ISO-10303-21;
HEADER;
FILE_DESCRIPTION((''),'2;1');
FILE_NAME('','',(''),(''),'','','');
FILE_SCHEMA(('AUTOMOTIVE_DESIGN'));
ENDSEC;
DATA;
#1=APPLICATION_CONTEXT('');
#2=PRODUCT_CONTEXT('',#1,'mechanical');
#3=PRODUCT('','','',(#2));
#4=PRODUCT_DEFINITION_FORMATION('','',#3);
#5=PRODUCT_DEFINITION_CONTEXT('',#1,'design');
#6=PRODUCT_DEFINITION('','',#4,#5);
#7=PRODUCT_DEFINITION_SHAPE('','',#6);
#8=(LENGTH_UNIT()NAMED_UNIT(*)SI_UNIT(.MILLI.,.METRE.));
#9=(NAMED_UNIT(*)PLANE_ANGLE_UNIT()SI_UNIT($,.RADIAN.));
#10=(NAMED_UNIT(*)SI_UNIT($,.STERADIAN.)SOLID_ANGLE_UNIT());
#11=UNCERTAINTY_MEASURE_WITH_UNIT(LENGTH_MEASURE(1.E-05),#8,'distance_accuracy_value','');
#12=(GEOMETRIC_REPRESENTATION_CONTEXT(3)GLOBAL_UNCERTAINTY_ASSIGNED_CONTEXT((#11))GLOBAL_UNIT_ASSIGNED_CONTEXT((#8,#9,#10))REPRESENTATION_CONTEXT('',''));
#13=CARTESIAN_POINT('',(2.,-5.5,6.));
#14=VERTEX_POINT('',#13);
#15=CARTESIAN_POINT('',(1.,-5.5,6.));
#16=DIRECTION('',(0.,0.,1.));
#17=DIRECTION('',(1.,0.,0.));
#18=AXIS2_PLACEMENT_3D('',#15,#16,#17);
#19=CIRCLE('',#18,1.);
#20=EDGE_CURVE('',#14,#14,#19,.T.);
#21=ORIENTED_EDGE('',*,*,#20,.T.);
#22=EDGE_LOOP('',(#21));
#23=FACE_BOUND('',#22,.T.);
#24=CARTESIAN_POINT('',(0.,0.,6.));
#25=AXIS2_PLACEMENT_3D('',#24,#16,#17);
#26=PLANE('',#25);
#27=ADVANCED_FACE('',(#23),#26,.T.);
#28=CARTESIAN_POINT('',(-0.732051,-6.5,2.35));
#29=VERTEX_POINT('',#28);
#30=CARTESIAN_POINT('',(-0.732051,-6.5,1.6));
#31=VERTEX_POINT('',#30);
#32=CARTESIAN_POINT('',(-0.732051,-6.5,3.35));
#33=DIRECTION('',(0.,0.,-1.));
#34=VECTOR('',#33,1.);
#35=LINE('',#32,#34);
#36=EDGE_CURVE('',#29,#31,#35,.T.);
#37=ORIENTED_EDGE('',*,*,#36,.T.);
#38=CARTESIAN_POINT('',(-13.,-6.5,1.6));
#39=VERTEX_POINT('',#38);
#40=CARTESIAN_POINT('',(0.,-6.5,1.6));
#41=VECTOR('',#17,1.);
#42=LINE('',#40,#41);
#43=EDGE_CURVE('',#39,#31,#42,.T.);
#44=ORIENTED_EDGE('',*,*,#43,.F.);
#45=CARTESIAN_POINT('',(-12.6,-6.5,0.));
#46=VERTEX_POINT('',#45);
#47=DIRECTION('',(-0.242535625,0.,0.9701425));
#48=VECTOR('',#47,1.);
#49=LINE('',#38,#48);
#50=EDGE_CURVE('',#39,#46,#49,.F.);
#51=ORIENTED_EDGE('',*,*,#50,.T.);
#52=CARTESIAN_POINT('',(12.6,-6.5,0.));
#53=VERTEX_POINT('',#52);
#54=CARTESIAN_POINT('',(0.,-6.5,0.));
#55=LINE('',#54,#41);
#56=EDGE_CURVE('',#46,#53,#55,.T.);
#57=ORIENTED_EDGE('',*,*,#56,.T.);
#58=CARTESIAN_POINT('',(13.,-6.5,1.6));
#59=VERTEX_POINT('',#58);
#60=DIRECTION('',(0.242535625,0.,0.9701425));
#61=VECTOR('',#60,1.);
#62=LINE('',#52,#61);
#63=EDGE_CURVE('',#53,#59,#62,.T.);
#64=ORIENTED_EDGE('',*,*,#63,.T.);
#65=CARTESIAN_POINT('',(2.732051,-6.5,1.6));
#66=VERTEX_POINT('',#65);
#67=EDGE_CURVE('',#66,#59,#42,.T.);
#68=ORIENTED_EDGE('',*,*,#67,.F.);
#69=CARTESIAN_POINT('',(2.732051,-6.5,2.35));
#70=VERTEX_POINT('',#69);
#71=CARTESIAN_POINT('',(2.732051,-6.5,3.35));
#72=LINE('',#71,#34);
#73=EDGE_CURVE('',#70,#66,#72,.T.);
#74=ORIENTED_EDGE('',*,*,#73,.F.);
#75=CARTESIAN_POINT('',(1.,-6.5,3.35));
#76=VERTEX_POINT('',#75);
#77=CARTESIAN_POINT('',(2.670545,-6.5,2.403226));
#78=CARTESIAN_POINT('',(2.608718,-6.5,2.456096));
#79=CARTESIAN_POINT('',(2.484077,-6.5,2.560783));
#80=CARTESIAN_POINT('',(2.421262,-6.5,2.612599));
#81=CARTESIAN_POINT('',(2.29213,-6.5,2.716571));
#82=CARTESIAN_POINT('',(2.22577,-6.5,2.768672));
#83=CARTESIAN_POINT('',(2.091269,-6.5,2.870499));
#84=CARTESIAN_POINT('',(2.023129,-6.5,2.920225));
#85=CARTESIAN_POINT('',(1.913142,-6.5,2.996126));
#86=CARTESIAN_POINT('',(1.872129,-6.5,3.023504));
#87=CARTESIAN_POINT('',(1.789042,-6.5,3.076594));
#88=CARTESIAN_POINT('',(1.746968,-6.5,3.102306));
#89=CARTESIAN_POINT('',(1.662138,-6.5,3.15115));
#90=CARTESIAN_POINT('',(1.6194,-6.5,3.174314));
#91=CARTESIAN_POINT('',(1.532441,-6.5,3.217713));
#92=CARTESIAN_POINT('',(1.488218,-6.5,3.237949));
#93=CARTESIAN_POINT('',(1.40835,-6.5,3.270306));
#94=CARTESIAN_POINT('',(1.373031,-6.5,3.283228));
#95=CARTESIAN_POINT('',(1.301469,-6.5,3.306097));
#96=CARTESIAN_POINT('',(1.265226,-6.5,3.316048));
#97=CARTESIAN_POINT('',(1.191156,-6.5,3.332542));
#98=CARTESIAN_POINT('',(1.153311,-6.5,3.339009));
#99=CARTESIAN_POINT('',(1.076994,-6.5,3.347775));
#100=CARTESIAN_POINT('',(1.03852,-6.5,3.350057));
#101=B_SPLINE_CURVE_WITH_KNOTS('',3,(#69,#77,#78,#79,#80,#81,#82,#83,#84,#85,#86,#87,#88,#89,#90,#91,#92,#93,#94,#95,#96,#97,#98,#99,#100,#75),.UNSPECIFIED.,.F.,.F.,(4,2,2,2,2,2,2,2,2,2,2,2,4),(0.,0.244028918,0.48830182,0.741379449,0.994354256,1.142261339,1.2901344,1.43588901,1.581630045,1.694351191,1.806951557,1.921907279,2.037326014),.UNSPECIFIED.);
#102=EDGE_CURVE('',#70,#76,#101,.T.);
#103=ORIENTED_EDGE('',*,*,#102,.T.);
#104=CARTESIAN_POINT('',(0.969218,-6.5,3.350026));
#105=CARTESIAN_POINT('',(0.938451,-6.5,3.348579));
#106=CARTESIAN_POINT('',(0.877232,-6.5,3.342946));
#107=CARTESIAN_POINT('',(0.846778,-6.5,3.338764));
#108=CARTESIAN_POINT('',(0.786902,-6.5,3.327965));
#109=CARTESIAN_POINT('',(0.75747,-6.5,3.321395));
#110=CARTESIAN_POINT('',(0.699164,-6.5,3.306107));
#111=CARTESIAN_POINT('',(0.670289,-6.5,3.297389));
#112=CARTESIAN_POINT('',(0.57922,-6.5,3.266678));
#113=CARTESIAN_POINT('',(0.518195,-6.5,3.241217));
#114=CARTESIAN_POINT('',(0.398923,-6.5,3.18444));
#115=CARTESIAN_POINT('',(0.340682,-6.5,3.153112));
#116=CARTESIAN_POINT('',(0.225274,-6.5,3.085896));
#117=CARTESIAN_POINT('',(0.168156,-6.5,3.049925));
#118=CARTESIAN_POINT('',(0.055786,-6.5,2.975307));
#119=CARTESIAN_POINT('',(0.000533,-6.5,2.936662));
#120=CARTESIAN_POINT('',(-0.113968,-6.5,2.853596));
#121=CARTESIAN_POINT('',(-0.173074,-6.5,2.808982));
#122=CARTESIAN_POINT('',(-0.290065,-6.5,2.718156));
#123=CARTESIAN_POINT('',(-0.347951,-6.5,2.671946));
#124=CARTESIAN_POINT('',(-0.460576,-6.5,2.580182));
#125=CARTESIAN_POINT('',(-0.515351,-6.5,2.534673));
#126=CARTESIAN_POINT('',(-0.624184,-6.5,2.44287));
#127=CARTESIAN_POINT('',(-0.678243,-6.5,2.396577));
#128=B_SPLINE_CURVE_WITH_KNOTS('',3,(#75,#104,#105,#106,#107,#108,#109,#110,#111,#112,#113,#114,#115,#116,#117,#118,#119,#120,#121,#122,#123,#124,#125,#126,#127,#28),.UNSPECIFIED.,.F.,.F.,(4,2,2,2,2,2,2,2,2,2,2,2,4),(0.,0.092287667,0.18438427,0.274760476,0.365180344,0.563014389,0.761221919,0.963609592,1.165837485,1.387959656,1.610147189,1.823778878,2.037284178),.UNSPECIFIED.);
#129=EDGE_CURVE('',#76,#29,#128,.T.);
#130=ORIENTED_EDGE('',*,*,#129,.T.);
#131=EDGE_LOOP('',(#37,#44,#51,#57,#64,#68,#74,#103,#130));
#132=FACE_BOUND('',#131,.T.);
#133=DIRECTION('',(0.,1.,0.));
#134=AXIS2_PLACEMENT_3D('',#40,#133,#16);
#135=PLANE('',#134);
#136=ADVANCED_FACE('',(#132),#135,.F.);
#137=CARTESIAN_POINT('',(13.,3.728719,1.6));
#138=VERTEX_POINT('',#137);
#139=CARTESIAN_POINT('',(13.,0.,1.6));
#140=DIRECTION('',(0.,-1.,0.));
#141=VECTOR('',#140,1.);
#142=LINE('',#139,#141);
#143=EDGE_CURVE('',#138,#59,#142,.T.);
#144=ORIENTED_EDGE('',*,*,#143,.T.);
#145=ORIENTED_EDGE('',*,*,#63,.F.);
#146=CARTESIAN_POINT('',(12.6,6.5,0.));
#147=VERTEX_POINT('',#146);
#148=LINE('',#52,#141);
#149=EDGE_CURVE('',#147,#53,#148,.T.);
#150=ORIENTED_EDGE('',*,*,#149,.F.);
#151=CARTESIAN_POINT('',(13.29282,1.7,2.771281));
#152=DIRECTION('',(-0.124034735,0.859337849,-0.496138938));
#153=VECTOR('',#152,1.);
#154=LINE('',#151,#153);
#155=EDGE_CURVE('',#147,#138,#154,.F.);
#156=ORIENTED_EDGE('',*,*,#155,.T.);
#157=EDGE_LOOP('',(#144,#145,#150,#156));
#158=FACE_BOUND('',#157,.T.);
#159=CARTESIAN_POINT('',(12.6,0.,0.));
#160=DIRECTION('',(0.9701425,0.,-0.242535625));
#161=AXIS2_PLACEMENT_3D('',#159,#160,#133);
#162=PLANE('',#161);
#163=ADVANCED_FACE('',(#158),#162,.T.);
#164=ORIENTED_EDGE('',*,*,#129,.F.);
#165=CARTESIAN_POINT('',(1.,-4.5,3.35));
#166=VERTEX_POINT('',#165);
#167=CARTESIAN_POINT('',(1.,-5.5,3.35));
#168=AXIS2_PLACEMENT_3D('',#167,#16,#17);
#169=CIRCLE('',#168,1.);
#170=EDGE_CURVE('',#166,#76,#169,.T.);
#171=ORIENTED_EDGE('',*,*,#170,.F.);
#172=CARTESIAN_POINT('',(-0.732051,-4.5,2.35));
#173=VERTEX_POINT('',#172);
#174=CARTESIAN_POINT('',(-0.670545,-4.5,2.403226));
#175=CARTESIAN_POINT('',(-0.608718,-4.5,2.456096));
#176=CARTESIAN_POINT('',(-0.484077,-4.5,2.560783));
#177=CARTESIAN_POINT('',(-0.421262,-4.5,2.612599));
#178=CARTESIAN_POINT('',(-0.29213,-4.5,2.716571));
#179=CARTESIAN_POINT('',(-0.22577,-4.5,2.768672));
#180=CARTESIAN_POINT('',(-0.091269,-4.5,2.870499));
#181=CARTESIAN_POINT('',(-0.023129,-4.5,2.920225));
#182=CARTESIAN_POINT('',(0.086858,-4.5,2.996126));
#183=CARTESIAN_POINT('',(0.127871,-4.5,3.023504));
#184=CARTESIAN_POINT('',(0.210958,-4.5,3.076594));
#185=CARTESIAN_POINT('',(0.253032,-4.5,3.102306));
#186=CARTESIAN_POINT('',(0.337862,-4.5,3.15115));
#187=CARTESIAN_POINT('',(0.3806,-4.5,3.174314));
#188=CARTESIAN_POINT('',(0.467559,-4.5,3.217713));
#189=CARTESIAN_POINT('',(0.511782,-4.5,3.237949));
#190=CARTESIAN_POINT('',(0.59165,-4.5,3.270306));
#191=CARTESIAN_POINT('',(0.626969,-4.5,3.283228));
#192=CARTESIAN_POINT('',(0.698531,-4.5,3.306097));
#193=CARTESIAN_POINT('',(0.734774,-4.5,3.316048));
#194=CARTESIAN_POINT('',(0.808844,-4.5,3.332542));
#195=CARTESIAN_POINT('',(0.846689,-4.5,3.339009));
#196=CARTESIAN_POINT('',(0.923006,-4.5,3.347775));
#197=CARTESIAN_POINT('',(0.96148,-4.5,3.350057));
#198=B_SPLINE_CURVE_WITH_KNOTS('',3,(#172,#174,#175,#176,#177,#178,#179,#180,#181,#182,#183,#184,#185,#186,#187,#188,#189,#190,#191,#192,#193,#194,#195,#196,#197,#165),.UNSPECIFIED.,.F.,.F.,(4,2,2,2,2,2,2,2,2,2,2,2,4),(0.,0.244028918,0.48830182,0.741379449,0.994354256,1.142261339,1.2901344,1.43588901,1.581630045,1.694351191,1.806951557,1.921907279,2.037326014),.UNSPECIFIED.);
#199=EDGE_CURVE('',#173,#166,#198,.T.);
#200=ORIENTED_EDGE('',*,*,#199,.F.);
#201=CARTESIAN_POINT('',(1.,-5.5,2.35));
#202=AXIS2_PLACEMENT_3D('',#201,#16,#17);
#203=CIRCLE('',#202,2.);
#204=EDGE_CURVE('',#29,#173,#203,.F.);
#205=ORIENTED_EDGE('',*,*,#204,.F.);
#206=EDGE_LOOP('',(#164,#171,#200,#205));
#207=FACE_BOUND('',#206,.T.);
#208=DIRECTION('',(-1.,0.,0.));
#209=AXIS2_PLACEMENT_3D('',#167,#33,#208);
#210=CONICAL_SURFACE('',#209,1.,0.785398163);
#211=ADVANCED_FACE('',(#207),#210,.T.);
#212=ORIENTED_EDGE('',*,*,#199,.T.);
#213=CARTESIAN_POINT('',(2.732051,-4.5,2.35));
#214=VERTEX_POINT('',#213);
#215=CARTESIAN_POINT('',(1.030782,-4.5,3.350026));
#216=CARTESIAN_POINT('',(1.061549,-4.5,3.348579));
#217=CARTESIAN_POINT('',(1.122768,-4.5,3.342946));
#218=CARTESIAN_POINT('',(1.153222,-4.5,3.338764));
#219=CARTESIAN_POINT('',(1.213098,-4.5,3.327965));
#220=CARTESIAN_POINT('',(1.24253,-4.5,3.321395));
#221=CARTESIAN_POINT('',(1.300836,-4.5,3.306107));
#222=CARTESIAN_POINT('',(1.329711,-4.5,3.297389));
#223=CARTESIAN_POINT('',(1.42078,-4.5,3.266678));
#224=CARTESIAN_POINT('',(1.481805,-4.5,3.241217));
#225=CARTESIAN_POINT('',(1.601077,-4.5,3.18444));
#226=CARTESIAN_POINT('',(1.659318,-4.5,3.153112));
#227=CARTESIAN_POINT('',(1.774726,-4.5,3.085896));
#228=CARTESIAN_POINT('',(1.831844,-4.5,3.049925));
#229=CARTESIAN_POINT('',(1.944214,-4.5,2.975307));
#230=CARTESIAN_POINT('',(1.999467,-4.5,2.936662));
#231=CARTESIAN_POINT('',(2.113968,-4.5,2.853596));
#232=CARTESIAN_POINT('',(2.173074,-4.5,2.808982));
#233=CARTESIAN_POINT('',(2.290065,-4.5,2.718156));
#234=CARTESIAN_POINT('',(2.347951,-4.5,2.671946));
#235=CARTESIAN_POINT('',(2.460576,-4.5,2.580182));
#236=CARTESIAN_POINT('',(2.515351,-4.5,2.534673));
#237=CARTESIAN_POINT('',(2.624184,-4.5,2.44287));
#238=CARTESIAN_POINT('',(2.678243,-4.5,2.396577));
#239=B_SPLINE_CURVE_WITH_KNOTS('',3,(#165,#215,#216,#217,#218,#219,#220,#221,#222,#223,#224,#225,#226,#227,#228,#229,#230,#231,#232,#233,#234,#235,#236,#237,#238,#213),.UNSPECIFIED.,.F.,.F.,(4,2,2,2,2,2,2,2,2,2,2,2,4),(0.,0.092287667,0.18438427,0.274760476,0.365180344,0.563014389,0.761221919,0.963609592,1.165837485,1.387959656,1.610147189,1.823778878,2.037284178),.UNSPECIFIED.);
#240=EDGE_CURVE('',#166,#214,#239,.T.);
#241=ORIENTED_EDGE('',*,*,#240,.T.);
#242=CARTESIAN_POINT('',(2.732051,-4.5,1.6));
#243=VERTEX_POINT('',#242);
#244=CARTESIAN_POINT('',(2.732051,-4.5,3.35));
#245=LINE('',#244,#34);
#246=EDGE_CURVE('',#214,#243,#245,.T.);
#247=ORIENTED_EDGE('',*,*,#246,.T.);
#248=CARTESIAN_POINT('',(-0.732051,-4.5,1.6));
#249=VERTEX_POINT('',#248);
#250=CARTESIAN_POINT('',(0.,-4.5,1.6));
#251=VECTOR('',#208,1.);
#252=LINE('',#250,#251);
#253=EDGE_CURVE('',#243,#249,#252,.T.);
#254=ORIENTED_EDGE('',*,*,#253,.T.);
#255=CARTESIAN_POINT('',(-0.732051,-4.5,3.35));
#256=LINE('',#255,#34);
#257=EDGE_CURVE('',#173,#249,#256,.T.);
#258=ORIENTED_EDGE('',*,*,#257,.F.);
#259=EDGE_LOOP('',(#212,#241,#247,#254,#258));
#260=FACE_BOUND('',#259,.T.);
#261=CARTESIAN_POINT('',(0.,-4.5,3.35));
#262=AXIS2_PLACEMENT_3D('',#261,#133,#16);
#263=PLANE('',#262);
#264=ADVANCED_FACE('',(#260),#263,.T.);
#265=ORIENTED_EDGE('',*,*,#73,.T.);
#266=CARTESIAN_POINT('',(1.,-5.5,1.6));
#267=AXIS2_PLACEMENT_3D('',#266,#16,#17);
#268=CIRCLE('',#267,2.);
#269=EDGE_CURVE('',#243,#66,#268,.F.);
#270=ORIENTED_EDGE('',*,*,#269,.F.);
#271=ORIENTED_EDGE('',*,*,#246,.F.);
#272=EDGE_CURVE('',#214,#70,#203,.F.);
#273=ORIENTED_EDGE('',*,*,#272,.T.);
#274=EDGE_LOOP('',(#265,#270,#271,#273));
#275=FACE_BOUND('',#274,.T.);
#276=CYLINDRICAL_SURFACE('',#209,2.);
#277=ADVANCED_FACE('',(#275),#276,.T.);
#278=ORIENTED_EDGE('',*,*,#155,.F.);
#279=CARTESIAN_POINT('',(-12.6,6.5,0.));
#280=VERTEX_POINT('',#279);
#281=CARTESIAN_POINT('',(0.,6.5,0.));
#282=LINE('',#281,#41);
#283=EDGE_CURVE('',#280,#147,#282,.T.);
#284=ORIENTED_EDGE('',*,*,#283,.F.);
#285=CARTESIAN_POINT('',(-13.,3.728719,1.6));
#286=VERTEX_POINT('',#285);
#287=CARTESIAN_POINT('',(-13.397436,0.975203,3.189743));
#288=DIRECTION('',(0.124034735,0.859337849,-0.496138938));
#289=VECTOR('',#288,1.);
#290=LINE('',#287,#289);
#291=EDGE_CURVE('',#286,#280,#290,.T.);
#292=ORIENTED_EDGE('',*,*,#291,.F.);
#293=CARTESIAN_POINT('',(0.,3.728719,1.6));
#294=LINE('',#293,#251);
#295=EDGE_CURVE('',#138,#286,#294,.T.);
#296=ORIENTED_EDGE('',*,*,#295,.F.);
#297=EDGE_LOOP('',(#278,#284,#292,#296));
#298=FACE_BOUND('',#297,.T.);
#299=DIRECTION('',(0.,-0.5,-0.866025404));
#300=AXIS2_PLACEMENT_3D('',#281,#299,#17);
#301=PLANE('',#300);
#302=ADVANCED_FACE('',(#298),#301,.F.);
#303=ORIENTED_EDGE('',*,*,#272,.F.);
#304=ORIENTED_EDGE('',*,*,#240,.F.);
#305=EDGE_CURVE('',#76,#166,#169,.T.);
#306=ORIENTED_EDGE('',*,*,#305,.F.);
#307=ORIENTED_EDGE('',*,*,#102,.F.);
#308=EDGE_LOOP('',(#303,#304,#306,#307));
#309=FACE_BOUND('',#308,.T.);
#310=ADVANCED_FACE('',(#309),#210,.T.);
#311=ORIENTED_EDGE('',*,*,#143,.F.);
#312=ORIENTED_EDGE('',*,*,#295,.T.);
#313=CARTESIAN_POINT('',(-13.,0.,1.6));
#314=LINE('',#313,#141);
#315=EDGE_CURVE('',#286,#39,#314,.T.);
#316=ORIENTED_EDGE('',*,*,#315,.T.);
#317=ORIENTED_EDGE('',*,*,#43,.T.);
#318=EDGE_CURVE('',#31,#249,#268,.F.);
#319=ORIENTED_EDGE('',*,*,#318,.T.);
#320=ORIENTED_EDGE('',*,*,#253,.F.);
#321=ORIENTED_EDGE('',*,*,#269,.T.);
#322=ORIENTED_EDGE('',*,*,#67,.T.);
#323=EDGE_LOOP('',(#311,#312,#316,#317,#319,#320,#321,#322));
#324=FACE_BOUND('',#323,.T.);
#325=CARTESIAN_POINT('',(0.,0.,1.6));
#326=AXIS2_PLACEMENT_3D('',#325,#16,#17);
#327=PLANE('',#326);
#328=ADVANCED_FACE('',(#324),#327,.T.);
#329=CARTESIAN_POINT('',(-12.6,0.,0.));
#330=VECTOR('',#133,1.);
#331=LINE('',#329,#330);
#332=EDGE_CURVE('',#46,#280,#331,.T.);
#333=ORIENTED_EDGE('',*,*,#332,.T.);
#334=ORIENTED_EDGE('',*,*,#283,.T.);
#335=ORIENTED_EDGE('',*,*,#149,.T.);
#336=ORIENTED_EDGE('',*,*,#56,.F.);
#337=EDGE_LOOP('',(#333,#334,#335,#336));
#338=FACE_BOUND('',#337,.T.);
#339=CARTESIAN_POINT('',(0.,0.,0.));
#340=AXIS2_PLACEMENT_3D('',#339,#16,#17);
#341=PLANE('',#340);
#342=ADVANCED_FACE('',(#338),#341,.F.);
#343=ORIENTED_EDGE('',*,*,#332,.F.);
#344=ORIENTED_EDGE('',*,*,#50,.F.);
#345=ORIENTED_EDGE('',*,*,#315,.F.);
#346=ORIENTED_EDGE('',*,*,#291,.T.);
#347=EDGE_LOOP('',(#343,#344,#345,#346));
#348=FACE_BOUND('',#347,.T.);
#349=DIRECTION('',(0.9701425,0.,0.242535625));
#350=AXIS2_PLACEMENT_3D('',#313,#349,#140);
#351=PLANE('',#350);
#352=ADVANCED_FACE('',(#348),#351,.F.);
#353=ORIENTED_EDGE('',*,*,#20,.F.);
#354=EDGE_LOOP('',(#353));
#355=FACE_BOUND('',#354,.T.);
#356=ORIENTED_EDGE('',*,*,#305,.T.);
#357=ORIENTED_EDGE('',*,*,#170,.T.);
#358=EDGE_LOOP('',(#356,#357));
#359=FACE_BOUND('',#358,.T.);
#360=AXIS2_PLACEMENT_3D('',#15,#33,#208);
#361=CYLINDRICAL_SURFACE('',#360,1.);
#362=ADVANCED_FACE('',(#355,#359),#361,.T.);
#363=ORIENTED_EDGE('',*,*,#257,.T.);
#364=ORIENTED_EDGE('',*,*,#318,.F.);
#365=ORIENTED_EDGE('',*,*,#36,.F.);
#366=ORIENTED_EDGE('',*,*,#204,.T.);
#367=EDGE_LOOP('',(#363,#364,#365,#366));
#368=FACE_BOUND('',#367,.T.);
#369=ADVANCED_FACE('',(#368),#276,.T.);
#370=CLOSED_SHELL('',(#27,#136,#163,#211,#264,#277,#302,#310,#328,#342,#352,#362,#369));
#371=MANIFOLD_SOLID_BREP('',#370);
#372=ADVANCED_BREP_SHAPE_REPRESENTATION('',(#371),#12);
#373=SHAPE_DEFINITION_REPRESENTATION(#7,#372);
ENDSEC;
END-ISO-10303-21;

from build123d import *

# Parameters (mm, degrees)
AUFSATZ_LINEAR_AUSTRAGEN1_DEPTH = 1.6
SKIZZE1_3_R                     = 1.0000000000000002
AUFSATZ_LINEAR_AUSTRAGEN2_DEPTH = 6
AUFSATZ_LINEAR_AUSTRAGEN3_DEPTH = 3.35
FASE1_SIZE                      = 1
FASE2_SIZE                      = 1.6
FASE2_SIZE_2                    = 0.4
FASE3_SIZE                      = 0.4
FASE3_SIZE_2                    = 1.6
FASE4_SIZE                      = 2.771281292
FASE4_SIZE_2                    = 1.6


# Some blends are built 0.0001 mm under size
with BuildPart() as part:
    # Skizze1 → Aufsatz-Linear austragen1 (new body)
    with BuildSketch(Plane.XY):
        Polygon((-13, 6.500000000000001), (13, 6.500000000000001), (13.000000000000004, -6.499999999999999), (-12.999999999999998, -6.499999999999999), align=None)
    extrude(amount=AUFSATZ_LINEAR_AUSTRAGEN1_DEPTH)

    # Skizze1<3> → Aufsatz-Linear austragen2 (add)
    with BuildSketch(Plane.XY):
        with Locations(Location((1.0000000000000009, -5.499999999999999, 0), (0, 0, 270))):
            Circle(SKIZZE1_3_R)
    extrude(amount=AUFSATZ_LINEAR_AUSTRAGEN2_DEPTH)

    # Skizze1<4> → Aufsatz-Linear austragen3 (add)
    with BuildSketch(Plane.XY):
        with BuildLine():
            ThreePointArc((-0.732050807568877, -4.499999999999999), (-0.9999999999999996, -5.4999999999999885), (-0.7320508075688883, -6.49999999999998))
            Line((-0.7320508075688945, -6.499999999999999), (1.000000000000023, -6.499999999999999))
            ThreePointArc((1.0000000000000238, -6.499999999999999), (6.7e-16, -5.499999999999999), (1.000000000000023, -4.499999999999999))
            Line((1.000000000000023, -4.499999999999999), (-0.732050807568877, -4.499999999999999))
        make_face()
        with BuildLine():
            Line((1.000000000000023, -6.499999999999999), (2.7320508075688927, -6.499999999999999))
            ThreePointArc((2.732050807568887, -6.499999999999985), (2.93185165257814, -6.0176380902050335), (3.0000000000000013, -5.5))
            ThreePointArc((3.0000000000000013, -5.499999999999999), (2.931851652578138, -4.982361909794958), (2.7320508075688785, -4.499999999999999))
            Line((2.7320508075688785, -4.499999999999999), (1.000000000000023, -4.499999999999999))
            ThreePointArc((1.000000000000023, -4.499999999999999), (1.7071067811865563, -4.792893218813459), (2.000000000000001, -5.499999999999999))
            ThreePointArc((2.000000000000001, -5.499999999999999), (1.7071067811865566, -6.207106781186539), (1.0000000000000238, -6.499999999999999))
        make_face()
    extrude(amount=AUFSATZ_LINEAR_AUSTRAGEN3_DEPTH)

    # Fase1
    fase1_edges = [part.edges().sort_by_distance(p)[0] for p in [
        (3.0000000000000018, -5.499999999999993, 3.35),
        (-1, -5.499999999999988, 3.35),
    ]]
    chamfer(fase1_edges, length=FASE1_SIZE - 0.0001)  # a hair under: the kernel refuses the full size

    # Fase2
    # the kernel refuses this chamfer: 1.6, 0.4 mm, written as the material it takes off along each edge
    with BuildSketch(Plane(origin=(12.999999999999998, 10.655403999635418, 0), x_dir=(0.009338610640317949, 0, 0.9999563942249226), z_dir=(2.7e-16, -1, 0))) as fase2_piece_1:
        Polygon((FASE2_SIZE * 0.999956394225, FASE2_SIZE * 0.00933861064032), (-FASE2_SIZE_2 * 0.00933861064032, FASE2_SIZE_2 * 0.999956394225), (0, 0), align=None)
    extrude(amount=21.310807999270835, mode=Mode.SUBTRACT)

    # Fase3
    # the kernel refuses this chamfer: 1.6, 0.4 mm, written as the material it takes off along each edge
    with BuildSketch(Plane(origin=(-12.999999999999998, -10.655403999635418, 0), x_dir=(0.9890197255468893, 0, -0.1477835663365709), z_dir=(-1.4e-16, 1, 0))) as fase3_piece_1:
        Polygon((FASE3_SIZE * 0.989019725547, -FASE3_SIZE * 0.147783566337), (-FASE3_SIZE_2 * 0.147783566337, -FASE3_SIZE_2 * 0.989019725547), (0, 0), align=None)
    extrude(amount=21.310807999270835, mode=Mode.SUBTRACT)

    # Fase4
    # the kernel refuses this chamfer: 2.771281292, 1.6 mm, written as the material it takes off along each edge
    with BuildSketch(Plane(origin=(-20.169542352935284, 6.500000000000001, 1.6), x_dir=(0, -0.999813220622208, 0.01932676561270061), z_dir=(1, 0, 0))) as fase4_piece_1:
        Polygon((FASE4_SIZE * 0.999813220662, FASE4_SIZE * 0.0193267656135), (-FASE4_SIZE_2 * 0.0193267656127, FASE4_SIZE_2 * 0.999813220622), (0, 0), align=None)
    extrude(amount=40.33908470587056, mode=Mode.SUBTRACT)


solid = part.part
